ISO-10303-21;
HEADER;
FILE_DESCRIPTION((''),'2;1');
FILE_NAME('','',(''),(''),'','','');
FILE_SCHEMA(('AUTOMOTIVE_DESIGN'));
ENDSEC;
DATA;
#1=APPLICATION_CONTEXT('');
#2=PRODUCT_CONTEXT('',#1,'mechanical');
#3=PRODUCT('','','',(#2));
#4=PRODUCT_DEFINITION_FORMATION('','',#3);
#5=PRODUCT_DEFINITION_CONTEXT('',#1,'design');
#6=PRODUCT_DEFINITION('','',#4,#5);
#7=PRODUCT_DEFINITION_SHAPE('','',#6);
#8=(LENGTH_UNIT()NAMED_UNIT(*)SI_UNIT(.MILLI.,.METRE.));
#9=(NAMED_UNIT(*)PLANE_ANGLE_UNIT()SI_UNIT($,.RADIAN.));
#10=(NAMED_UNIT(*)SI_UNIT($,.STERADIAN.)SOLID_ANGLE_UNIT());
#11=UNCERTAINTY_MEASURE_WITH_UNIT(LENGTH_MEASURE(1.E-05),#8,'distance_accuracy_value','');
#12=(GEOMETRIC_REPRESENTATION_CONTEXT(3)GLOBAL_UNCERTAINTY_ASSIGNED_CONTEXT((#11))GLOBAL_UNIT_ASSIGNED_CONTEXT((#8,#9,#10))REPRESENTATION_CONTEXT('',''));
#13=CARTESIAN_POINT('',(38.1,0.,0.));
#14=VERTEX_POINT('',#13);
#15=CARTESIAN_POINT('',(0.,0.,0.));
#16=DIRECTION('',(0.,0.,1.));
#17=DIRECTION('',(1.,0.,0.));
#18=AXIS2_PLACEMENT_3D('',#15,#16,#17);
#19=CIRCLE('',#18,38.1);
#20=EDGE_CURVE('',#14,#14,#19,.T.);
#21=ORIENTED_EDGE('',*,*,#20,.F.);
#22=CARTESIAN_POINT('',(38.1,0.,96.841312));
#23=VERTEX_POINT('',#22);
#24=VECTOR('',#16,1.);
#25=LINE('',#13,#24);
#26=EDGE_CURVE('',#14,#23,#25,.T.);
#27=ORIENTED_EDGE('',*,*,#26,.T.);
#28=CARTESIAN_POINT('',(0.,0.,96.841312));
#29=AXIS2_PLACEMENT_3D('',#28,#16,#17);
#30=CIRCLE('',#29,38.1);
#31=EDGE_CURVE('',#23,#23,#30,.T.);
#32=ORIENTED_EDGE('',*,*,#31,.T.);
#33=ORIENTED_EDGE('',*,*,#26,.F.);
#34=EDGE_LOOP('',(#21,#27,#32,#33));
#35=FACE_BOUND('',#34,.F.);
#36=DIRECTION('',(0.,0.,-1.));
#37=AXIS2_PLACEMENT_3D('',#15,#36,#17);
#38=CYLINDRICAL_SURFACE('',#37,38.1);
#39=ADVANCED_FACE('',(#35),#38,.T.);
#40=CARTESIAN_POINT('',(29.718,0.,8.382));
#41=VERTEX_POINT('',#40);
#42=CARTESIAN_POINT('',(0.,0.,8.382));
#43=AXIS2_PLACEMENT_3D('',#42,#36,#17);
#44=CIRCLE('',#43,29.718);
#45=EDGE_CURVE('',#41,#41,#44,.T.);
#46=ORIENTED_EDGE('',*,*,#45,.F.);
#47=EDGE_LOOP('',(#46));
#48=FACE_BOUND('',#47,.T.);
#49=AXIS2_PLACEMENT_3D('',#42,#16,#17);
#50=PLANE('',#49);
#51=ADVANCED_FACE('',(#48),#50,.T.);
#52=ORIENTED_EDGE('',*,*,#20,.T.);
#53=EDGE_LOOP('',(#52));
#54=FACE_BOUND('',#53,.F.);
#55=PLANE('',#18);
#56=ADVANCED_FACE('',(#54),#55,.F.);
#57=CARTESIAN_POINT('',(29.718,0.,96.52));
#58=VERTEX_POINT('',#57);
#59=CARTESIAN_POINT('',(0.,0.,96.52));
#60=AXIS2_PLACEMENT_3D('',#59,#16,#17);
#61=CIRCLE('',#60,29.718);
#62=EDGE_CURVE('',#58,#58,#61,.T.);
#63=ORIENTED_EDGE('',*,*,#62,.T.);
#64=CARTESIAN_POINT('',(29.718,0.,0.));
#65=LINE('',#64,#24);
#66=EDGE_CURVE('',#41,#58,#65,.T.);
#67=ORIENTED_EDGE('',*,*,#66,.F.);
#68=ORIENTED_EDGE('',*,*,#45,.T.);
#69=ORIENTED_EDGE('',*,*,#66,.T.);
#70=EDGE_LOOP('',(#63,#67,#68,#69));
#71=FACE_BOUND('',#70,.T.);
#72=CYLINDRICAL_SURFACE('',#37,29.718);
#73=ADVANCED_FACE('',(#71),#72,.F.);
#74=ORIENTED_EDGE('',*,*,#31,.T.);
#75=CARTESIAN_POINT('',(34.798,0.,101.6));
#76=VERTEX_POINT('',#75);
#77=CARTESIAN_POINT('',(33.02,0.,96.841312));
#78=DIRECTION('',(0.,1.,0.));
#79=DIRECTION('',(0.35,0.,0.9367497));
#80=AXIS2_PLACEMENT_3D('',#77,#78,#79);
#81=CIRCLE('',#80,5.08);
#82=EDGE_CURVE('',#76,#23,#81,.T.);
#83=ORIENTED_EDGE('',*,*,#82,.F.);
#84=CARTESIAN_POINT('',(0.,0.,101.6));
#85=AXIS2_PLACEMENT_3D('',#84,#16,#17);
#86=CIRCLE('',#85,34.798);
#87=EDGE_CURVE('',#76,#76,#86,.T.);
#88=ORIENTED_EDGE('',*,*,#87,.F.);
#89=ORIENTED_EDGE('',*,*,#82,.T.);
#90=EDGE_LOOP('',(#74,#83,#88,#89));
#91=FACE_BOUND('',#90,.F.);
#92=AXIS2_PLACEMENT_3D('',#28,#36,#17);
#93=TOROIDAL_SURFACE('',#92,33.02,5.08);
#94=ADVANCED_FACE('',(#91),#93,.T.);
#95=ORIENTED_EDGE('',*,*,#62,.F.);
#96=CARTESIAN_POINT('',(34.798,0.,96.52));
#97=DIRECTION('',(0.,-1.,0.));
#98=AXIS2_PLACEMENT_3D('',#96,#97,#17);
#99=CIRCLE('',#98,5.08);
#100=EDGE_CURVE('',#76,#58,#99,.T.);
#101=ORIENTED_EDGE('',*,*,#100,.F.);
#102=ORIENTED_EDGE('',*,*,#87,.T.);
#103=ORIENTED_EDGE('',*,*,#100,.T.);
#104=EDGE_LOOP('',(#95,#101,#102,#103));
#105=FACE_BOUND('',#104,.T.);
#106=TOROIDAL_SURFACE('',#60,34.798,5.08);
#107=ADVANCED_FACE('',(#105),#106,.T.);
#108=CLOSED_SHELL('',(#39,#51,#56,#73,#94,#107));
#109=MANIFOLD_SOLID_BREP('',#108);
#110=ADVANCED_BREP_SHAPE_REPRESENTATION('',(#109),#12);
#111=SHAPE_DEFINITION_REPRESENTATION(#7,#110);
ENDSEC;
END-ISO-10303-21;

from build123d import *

# Parameters (mm, degrees)
F0_R     = 38.1
F1_DEPTH = 101.6
F2_T     = -8.382
F3_R     = 5.08


# Not quite as in the source:
# - a fillet or chamfer that OpenCascade refuses, or shapes differently, is made with other operations: its cross-section is extruded or revolved along the edge and cut away or added


with BuildPart() as f1:
    # F0 (on Top) → F1 (new body)
    with BuildSketch(Plane.XY):
        Circle(F0_R)
    extrude(amount=F1_DEPTH)

    # F2
    f2_openings = [f1.faces().sort_by_distance(p)[0] for p in [
        (0, 0, 101.6),
    ]]
    offset(amount=F2_T, openings=f2_openings)

    # F3
    f3_edges = [f1.edges().sort_by_distance(p)[0] for p in [
        (-29.718, 0, 101.6),
    ]]
    fillet(f3_edges, radius=F3_R)

    # F4: fillet of radius 5.08 on 1 edges, made by hand

    # F4_s1 → F4_t2 (revolve, cut)
    with BuildSketch(Plane.XZ):
        with BuildLine():
            ThreePointArc((34.798, 101.6), (37.1936458882, 99.737357105), (38.1, 96.8413115252))
            Line((38.1, 96.8413115252), (38.1, 101.6))
            Line((38.1, 101.6), (34.798, 101.6))
        make_face()
    revolve(axis=Axis((0, 0, 101.6), (0, 0, 1)), mode=Mode.SUBTRACT)


solid = f1.part
